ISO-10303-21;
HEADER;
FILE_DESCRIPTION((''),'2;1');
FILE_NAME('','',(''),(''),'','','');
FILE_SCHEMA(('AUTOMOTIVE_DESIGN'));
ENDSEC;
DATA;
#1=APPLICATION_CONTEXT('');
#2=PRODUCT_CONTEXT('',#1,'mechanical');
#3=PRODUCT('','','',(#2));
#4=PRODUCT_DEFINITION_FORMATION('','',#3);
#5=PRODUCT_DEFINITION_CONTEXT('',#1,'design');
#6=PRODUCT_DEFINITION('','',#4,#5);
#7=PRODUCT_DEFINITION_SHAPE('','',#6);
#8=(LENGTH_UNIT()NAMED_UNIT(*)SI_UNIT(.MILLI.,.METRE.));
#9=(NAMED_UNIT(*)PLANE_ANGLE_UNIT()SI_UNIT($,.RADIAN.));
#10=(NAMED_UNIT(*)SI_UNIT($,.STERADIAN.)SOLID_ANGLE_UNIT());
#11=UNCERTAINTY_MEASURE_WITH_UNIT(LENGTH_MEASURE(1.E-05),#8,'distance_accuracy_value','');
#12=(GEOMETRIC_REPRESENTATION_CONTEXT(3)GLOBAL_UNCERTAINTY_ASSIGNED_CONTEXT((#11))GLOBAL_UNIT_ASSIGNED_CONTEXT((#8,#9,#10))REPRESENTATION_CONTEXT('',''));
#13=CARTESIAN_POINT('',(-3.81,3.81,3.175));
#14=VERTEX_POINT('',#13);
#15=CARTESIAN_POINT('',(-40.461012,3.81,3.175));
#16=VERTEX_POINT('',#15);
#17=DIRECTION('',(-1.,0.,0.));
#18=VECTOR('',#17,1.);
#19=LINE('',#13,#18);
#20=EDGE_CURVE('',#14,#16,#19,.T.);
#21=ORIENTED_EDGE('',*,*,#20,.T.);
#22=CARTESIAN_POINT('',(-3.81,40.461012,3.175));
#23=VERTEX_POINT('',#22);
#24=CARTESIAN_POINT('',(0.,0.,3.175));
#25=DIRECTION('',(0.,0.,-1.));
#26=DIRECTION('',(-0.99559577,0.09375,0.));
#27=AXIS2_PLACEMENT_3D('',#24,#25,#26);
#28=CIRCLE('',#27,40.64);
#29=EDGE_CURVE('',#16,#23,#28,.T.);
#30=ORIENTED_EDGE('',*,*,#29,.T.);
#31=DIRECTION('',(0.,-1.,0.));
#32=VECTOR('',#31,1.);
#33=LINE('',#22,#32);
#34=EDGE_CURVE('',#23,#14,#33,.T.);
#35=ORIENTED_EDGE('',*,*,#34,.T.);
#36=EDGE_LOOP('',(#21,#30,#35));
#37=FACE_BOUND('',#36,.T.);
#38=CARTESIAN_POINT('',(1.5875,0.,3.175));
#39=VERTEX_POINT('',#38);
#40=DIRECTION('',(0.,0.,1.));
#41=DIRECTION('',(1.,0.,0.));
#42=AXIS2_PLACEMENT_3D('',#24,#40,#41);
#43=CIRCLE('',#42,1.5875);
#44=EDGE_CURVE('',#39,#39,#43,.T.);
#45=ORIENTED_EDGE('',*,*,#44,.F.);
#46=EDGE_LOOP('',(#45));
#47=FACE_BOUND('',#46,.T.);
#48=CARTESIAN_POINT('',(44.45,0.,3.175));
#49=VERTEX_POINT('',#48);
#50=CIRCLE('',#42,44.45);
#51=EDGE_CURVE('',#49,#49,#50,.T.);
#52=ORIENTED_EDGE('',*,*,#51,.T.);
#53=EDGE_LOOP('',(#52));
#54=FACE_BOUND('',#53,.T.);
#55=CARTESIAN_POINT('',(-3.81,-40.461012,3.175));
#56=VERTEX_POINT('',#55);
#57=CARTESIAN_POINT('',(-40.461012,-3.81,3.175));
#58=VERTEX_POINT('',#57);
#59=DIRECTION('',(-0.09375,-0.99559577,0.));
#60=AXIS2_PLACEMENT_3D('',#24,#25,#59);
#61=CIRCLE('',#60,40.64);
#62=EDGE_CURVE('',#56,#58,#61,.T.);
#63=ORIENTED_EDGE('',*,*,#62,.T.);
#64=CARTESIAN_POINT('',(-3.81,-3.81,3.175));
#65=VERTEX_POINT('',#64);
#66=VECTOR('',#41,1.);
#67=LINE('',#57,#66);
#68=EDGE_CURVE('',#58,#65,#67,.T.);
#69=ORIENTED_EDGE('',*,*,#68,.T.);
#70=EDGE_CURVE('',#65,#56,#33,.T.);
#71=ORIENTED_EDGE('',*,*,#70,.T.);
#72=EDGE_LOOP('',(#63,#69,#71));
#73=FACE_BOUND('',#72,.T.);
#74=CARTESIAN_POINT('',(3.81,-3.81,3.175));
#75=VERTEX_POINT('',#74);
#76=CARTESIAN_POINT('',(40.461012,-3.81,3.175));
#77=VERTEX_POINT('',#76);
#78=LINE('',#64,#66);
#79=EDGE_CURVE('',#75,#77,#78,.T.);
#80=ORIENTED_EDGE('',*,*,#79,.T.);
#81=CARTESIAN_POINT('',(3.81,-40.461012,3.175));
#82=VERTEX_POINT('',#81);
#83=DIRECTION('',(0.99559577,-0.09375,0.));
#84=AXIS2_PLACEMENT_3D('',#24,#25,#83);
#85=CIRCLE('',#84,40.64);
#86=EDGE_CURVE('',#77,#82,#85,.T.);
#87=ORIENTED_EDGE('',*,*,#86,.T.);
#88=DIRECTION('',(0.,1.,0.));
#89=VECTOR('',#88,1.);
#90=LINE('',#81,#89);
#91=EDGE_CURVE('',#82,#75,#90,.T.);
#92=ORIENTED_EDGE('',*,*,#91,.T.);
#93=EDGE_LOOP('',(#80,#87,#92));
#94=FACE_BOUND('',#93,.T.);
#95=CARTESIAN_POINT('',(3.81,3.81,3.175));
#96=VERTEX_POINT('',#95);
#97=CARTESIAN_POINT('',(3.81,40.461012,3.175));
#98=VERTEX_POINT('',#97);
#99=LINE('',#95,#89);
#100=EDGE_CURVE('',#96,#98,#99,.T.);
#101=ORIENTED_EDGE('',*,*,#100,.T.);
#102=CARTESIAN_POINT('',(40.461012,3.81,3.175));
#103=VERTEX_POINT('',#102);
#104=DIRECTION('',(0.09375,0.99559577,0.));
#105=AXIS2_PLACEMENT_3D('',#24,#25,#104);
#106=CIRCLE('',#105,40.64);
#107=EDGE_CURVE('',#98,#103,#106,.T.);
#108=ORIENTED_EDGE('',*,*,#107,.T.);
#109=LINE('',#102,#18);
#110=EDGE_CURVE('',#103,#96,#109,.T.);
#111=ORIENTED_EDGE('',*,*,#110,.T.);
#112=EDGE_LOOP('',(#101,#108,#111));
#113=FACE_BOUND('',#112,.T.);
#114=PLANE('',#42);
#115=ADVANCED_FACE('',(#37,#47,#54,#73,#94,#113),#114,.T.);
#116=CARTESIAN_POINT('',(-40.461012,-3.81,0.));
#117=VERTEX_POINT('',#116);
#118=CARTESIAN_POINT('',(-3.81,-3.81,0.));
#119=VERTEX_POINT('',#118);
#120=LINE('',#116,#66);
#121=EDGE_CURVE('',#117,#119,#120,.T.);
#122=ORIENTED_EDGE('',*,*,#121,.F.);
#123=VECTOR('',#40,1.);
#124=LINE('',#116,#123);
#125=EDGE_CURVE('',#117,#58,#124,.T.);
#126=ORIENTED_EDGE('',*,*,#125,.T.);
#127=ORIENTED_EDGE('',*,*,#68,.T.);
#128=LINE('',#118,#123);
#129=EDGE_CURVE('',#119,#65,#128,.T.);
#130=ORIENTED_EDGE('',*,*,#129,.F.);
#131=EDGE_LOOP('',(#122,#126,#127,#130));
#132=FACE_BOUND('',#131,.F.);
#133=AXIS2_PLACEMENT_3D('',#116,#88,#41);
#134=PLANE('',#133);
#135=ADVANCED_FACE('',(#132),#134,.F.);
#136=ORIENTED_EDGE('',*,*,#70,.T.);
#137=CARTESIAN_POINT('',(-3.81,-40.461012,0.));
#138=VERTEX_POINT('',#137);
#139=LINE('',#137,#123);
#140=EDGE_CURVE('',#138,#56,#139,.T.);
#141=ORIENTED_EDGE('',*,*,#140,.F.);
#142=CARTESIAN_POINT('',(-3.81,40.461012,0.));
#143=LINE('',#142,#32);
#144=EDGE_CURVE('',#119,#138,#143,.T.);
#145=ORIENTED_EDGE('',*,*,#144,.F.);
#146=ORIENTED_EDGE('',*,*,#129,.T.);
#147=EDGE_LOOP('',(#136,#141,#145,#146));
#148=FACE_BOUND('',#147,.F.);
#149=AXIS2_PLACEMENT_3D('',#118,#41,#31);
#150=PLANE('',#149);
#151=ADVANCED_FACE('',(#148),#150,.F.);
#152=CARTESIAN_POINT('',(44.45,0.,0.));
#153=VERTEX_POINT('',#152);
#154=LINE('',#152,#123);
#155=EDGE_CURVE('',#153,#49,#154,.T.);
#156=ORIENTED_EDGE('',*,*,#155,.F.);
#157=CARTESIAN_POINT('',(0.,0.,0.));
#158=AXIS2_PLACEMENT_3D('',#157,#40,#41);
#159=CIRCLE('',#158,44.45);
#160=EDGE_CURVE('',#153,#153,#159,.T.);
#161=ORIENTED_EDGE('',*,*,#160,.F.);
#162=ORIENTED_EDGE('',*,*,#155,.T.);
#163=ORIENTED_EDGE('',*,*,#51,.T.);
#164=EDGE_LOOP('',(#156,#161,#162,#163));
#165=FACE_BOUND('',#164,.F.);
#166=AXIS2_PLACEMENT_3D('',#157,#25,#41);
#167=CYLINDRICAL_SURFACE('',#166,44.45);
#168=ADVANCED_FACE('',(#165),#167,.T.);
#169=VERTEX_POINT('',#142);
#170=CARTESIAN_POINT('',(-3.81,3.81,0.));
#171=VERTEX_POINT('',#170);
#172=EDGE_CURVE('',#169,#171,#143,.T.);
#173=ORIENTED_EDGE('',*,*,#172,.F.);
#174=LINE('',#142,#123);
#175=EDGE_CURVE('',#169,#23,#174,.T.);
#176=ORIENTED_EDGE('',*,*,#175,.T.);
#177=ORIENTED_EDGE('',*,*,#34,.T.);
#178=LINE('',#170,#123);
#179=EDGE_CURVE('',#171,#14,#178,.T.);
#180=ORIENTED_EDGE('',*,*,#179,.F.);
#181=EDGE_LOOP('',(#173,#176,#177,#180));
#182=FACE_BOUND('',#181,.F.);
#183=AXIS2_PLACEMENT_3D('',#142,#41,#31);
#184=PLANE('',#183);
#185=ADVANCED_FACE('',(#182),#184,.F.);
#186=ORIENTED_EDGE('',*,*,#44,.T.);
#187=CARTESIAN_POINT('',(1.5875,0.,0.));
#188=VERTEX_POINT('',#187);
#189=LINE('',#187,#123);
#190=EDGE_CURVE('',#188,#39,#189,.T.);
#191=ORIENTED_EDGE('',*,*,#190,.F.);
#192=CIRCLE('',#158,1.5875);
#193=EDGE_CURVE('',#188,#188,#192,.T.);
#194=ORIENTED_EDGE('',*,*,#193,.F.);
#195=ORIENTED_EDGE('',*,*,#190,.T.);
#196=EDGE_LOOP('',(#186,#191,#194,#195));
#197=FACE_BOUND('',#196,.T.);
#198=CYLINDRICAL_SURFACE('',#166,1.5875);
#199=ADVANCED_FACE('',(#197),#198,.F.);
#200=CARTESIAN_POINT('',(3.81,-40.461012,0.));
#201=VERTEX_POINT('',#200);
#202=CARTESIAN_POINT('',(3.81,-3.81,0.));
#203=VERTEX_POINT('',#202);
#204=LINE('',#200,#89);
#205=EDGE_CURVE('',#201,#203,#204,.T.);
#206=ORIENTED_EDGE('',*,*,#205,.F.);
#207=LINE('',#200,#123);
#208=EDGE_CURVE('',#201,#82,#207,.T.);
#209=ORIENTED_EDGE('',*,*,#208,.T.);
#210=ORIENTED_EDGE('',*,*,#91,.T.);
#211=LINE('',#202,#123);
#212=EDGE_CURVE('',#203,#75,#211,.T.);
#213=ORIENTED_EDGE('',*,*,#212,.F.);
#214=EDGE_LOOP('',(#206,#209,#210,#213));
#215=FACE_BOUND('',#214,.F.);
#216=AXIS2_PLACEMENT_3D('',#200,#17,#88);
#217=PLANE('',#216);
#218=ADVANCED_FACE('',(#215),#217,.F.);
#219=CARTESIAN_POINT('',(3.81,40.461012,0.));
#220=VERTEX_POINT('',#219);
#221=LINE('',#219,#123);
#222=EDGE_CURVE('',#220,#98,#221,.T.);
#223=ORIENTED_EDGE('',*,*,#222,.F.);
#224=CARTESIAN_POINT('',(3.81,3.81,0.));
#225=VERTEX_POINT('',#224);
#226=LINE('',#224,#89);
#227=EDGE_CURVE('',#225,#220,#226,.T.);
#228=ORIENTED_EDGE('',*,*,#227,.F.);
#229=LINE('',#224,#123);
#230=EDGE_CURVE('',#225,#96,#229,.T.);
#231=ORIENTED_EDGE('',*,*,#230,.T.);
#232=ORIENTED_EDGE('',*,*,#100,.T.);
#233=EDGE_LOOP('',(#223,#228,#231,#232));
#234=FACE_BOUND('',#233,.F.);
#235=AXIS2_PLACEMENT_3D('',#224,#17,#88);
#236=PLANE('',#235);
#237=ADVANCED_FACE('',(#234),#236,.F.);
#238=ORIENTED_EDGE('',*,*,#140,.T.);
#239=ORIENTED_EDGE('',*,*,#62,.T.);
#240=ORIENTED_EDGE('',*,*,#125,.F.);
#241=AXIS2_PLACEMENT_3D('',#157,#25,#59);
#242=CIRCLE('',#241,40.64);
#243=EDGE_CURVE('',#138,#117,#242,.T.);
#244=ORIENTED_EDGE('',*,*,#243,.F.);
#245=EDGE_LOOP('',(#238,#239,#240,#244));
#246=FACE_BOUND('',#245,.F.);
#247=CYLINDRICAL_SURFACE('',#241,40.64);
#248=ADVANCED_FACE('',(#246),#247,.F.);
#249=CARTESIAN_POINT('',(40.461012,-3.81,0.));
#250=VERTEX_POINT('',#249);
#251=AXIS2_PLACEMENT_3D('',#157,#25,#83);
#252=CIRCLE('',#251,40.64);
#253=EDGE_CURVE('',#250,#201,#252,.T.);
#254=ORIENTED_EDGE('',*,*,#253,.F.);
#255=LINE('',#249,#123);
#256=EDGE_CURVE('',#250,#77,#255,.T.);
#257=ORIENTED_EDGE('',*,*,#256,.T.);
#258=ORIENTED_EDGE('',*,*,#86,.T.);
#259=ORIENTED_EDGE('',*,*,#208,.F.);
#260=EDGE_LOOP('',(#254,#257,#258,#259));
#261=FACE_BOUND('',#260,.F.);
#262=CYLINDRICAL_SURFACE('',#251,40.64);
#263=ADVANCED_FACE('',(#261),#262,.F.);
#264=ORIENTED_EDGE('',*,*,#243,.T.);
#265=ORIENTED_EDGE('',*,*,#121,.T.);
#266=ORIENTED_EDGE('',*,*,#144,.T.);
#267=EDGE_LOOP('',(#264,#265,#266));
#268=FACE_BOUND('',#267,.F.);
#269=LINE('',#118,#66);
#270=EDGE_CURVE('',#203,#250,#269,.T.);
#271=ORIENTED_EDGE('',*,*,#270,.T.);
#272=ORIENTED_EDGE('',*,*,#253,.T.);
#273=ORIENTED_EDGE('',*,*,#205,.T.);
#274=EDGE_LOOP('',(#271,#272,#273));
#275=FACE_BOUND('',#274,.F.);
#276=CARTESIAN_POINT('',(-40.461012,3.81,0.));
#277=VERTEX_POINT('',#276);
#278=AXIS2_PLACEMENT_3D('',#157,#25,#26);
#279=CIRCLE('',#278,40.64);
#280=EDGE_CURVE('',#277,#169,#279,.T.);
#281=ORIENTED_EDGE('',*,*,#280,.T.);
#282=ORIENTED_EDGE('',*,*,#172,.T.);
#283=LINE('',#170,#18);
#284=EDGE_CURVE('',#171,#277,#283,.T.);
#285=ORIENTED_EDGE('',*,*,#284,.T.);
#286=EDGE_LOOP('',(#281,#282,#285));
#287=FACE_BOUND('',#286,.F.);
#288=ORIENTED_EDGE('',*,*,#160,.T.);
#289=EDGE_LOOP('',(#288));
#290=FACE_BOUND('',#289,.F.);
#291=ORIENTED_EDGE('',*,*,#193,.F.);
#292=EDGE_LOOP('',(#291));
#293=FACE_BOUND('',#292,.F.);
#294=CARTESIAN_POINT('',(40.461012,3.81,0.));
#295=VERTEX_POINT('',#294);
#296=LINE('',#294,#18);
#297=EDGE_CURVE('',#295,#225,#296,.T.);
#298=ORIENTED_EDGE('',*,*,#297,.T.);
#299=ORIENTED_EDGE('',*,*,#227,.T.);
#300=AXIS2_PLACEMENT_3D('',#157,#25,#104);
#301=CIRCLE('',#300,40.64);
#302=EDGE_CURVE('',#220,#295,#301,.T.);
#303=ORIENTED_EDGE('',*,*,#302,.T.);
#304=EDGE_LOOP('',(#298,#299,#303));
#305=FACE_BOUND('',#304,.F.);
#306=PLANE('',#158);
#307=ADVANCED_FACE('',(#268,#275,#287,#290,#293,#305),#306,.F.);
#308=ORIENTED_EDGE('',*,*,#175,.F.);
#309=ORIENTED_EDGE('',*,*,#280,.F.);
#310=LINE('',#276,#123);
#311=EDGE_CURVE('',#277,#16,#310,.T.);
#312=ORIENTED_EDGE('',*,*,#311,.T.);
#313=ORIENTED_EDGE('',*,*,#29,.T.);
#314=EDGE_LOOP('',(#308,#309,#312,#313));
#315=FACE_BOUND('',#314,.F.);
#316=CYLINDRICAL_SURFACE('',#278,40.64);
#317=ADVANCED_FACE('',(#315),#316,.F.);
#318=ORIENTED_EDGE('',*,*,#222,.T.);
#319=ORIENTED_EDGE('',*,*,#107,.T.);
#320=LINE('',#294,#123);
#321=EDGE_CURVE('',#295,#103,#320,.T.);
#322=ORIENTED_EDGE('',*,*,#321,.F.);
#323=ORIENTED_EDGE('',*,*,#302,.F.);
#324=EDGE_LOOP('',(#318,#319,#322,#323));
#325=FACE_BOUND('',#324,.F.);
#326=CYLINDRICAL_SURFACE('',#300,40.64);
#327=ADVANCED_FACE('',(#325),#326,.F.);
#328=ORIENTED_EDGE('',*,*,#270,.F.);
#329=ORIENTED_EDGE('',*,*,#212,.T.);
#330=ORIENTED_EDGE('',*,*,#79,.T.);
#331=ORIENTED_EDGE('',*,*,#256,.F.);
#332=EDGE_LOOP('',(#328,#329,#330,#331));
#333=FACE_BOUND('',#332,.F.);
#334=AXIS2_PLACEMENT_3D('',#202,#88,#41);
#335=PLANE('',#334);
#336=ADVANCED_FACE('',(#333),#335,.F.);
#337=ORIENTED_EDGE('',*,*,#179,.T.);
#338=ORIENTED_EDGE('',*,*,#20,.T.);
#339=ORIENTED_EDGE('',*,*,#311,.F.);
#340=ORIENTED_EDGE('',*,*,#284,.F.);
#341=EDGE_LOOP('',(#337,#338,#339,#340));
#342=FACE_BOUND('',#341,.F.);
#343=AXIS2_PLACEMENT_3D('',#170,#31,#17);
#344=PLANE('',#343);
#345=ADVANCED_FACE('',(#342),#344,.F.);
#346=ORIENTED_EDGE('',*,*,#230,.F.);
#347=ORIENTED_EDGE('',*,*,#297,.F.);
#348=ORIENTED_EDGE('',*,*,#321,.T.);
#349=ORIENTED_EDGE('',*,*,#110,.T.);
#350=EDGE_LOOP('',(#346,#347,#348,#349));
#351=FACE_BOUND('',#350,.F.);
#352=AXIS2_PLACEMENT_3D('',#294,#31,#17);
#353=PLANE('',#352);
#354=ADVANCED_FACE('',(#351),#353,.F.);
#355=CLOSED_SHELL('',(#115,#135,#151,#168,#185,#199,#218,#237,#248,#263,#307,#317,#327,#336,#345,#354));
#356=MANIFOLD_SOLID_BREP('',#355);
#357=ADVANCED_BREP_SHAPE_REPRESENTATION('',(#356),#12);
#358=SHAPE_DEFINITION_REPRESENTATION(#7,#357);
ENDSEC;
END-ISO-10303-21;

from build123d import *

# Parameters (mm, degrees)
F0_R     = 44.45
F0_R_2   = 1.5875
F1_DEPTH = 3.175


# Not quite as in the source:
# - a length typed as a fraction of an inch, garbled in the dataset ("3 / 203.2 mm" for 3/8 in), is restored


with BuildPart() as f1:
    # F0 (on Top) → F1 (new body)
    with BuildSketch(Plane.XY):
        Circle(F0_R)
        with BuildLine():
            ThreePointArc((40.4610120981, 3.81), (40.5952283629, 1.9071009851), (40.64, 0))
            ThreePointArc((40.64, 0), (40.5952283629, -1.9071009851), (40.4610120981, -3.81))
            ThreePointArc((40.4610120981, -3.81), (28.7368195874, -28.7368195874), (3.81, -40.4610120981))
            ThreePointArc((3.81, -40.4610120981), (0, -40.64), (-3.81, -40.4610120981))
            ThreePointArc((-3.81, -40.4610120981), (-28.7368195874, -28.7368195874), (-40.4610120981, -3.81))
            ThreePointArc((-40.4610120981, -3.81), (-40.64, 0), (-40.4610120981, 3.81))
            ThreePointArc((-40.4610120981, 3.81), (-28.7368195874, 28.7368195874), (-3.81, 40.4610120981))
            ThreePointArc((-3.81, 40.4610120981), (0, 40.64), (3.81, 40.4610120981))
            ThreePointArc((3.81, 40.4610120981), (28.7368195874, 28.7368195874), (40.4610120981, 3.81))
        make_face(mode=Mode.SUBTRACT)
        with BuildLine():
            ThreePointArc((40.4610120981, -3.81), (40.5952283629, -1.9071009851), (40.64, 0))
            ThreePointArc((40.64, 0), (40.5952283629, 1.9071009851), (40.4610120981, 3.81))
            Line((40.4610120981, 3.81), (3.81, 3.81))
            Line((3.81, 3.81), (3.81, 0))
            Line((3.81, 0), (3.81, -3.81))
            Line((3.81, -3.81), (40.4610120981, -3.81))
        make_face()
        with BuildLine():
            Line((3.81, 3.81), (3.81, 40.4610120981))
            ThreePointArc((3.81, 40.4610120981), (0, 40.64), (-3.81, 40.4610120981))
            Line((-3.81, 40.4610120981), (-3.81, 3.81))
            Line((-3.81, 3.81), (0, 3.81))
            Line((0, 3.81), (3.81, 3.81))
        make_face()
        Polygon((3.81, 0), (3.81, 3.81), (0, 3.81), (-3.81, 3.81), (-3.81, 0), (-3.81, -3.81), (0, -3.81), (3.81, -3.81), align=None)
        Circle(F0_R_2, mode=Mode.SUBTRACT)
        with BuildLine():
            ThreePointArc((-3.81, -40.4610120981), (0, -40.64), (3.81, -40.4610120981))
            Line((3.81, -40.4610120981), (3.81, -3.81))
            Line((3.81, -3.81), (0, -3.81))
            Line((0, -3.81), (-3.81, -3.81))
            Line((-3.81, -3.81), (-3.81, -40.4610120981))
        make_face()
        with BuildLine():
            Line((-3.81, 3.81), (-40.4610120981, 3.81))
            ThreePointArc((-40.4610120981, 3.81), (-40.64, 0), (-40.4610120981, -3.81))
            Line((-40.4610120981, -3.81), (-3.81, -3.81))
            Line((-3.81, -3.81), (-3.81, 0))
            Line((-3.81, 0), (-3.81, 3.81))
        make_face()
    extrude(amount=F1_DEPTH)


solid = f1.part
